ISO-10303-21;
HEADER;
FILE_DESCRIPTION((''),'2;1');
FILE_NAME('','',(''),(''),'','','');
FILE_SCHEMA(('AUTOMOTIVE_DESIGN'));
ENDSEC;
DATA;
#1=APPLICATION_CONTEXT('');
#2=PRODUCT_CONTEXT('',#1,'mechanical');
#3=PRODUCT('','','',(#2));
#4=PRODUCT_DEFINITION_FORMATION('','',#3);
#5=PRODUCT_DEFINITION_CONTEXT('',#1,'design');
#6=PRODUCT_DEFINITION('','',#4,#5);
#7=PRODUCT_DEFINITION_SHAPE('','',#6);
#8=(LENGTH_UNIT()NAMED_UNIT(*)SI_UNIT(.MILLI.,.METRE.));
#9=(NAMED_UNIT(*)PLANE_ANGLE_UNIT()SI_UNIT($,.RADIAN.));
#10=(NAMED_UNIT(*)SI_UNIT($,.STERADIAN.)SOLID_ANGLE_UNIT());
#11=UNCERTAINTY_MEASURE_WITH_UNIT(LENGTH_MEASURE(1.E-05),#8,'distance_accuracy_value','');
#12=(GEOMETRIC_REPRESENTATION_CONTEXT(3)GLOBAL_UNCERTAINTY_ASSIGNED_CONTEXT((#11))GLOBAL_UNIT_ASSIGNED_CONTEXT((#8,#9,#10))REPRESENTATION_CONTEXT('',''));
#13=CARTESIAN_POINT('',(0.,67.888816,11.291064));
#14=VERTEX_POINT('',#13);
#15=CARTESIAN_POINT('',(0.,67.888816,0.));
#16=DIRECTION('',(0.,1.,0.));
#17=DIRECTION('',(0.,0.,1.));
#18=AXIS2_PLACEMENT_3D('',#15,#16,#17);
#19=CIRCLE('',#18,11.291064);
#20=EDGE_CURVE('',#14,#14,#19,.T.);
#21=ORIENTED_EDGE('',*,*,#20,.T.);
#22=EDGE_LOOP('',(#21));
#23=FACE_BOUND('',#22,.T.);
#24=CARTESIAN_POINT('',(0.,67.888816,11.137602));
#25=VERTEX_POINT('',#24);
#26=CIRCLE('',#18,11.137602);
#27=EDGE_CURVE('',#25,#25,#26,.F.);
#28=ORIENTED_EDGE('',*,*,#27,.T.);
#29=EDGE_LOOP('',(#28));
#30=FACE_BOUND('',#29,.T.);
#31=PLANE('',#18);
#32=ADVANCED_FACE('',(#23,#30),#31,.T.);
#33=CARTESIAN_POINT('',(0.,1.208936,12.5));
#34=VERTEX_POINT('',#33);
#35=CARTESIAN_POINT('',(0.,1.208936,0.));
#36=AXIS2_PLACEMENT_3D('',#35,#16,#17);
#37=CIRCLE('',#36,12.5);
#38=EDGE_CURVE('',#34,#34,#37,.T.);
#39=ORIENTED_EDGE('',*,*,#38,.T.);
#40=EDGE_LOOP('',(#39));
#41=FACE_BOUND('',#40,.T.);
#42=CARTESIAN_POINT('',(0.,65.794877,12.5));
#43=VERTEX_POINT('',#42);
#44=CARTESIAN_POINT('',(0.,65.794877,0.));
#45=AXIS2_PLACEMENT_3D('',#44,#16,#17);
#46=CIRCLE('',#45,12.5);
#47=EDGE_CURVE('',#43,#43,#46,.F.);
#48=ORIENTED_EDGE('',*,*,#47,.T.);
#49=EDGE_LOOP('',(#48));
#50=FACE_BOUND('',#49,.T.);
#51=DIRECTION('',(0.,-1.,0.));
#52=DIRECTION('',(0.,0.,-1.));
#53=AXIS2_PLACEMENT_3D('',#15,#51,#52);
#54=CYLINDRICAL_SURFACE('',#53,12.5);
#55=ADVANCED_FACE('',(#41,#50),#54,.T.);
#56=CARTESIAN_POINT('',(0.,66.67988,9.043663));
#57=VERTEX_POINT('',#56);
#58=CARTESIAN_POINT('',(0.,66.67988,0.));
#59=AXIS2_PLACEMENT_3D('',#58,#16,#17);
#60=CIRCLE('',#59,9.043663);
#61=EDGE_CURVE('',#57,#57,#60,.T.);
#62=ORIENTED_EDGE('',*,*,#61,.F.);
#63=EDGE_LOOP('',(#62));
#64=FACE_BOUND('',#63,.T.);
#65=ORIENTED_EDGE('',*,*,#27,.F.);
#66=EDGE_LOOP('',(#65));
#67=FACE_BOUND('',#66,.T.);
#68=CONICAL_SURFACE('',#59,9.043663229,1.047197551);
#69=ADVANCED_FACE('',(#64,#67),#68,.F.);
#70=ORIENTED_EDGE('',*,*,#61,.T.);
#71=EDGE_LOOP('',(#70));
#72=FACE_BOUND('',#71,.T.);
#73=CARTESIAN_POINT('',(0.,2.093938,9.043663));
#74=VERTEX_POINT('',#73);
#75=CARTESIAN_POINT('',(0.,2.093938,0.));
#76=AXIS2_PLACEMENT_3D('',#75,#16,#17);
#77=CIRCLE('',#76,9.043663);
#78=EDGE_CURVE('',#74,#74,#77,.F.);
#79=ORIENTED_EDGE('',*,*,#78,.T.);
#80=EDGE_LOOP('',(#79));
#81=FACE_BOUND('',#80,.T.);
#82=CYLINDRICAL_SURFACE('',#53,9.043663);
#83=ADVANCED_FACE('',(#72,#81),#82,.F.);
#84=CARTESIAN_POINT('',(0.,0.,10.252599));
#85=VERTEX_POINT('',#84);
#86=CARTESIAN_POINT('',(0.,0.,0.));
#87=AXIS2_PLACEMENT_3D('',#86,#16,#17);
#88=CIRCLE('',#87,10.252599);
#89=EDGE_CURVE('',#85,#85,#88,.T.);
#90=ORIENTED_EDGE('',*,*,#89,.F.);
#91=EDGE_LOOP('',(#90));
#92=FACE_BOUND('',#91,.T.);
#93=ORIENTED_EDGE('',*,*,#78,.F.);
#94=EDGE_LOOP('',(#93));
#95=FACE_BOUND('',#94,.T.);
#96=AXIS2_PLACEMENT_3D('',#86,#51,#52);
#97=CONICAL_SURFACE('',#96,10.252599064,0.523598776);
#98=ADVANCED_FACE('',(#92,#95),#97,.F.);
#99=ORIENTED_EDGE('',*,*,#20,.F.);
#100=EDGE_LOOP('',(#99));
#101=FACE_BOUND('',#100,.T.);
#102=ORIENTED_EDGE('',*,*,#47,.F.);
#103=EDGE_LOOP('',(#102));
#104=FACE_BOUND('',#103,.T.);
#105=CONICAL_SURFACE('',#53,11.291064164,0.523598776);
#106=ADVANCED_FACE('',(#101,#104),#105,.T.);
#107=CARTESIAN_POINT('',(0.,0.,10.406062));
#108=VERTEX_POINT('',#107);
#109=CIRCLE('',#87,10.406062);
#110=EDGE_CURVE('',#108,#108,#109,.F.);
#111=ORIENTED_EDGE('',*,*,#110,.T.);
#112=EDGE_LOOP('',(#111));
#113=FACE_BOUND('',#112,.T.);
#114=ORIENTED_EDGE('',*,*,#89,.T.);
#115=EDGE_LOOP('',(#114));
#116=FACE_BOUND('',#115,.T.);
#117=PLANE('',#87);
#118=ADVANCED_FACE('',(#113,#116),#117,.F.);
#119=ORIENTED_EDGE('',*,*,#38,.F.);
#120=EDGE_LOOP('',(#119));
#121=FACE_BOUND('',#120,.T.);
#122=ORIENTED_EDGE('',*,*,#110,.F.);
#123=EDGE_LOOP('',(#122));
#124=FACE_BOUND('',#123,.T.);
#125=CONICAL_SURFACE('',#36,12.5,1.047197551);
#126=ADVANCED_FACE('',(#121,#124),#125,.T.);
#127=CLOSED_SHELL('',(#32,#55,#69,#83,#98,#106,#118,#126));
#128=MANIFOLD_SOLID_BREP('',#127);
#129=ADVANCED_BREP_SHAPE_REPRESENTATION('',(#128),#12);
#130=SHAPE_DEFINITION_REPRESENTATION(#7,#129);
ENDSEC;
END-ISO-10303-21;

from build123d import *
from OCP.BRepFilletAPI import BRepFilletAPI_MakeChamfer

# Parameters (mm, degrees)
SKETCH1_R           = 12.5
BOSS_EXTRUDE1_DEPTH = 67.888815627
SKETCH2_R           = 9.043663229
CUT_EXTRUDE1_DEPTH  = 71.152628513
CHAMFER1_SIZE       = 2.093938291
CHAMFER1_SIZE2      = 1.208935836


with BuildPart() as part:
    # Sketch1 → Boss-Extrude1 (new body)
    with BuildSketch(Plane(origin=(0, 0, 0), x_dir=(1, 0, 0), z_dir=(0, 1, 0))):
        Circle(SKETCH1_R)
    extrude(amount=BOSS_EXTRUDE1_DEPTH)

    # Sketch2 → Cut-Extrude1 (cut, through all)
    with BuildSketch(Plane(origin=(0, 0, 0), x_dir=(1, 0, 0), z_dir=(0, 1, 0))):
        Circle(SKETCH2_R)
    extrude(amount=CUT_EXTRUDE1_DEPTH, mode=Mode.SUBTRACT)

    # Chamfer1: one chamfer whose edges measure the first distance from different faces: ONE call of the kernel's chamfer builder (chamfer() names one face for all edges)
    chamfer1_edges_1 = [part.edges().sort_by_distance(p)[0] for p in [
        (-9.043663229, 67.888815627, 0),
    ]]
    chamfer1_side_1 = [part.faces().sort_by_distance(p)[0] for p in [
        (-12.146446609, 67.888815627, 0),
    ]]
    chamfer1_edges_2 = [part.edges().sort_by_distance(p)[0] for p in [
        (-9.043663229, 0, 0),
    ]]
    chamfer1_side_2 = [part.faces().sort_by_distance(p)[0] for p in [
        (-9.043663229, 33.944407814, 0),
    ]]
    chamfer1_edges_3 = [part.edges().sort_by_distance(p)[0] for p in [
        (-12.5, 0, 0),
    ]]
    chamfer1_side_3 = [part.faces().sort_by_distance(p)[0] for p in [
        (-12.146446609, 0, 0),
    ]]
    chamfer1_edges_4 = [part.edges().sort_by_distance(p)[0] for p in [
        (-12.5, 67.888815627, 0),
    ]]
    chamfer1_side_4 = [part.faces().sort_by_distance(p)[0] for p in [
        (-12.5, 33.944407814, 0),
    ]]
    chamfer1 = BRepFilletAPI_MakeChamfer(part.part.solid().wrapped)
    for e in chamfer1_edges_1:
        chamfer1.Add(CHAMFER1_SIZE, CHAMFER1_SIZE2, e.wrapped, chamfer1_side_1[0].wrapped)  # the first distance lies on this face
    for e in chamfer1_edges_2:
        chamfer1.Add(CHAMFER1_SIZE, CHAMFER1_SIZE2, e.wrapped, chamfer1_side_2[0].wrapped)  # the first distance lies on this face
    for e in chamfer1_edges_3:
        chamfer1.Add(CHAMFER1_SIZE, CHAMFER1_SIZE2, e.wrapped, chamfer1_side_3[0].wrapped)  # the first distance lies on this face
    for e in chamfer1_edges_4:
        chamfer1.Add(CHAMFER1_SIZE, CHAMFER1_SIZE2, e.wrapped, chamfer1_side_4[0].wrapped)  # the first distance lies on this face
    add(Compound.cast(chamfer1.Shape()), mode=Mode.REPLACE)


solid = part.part
